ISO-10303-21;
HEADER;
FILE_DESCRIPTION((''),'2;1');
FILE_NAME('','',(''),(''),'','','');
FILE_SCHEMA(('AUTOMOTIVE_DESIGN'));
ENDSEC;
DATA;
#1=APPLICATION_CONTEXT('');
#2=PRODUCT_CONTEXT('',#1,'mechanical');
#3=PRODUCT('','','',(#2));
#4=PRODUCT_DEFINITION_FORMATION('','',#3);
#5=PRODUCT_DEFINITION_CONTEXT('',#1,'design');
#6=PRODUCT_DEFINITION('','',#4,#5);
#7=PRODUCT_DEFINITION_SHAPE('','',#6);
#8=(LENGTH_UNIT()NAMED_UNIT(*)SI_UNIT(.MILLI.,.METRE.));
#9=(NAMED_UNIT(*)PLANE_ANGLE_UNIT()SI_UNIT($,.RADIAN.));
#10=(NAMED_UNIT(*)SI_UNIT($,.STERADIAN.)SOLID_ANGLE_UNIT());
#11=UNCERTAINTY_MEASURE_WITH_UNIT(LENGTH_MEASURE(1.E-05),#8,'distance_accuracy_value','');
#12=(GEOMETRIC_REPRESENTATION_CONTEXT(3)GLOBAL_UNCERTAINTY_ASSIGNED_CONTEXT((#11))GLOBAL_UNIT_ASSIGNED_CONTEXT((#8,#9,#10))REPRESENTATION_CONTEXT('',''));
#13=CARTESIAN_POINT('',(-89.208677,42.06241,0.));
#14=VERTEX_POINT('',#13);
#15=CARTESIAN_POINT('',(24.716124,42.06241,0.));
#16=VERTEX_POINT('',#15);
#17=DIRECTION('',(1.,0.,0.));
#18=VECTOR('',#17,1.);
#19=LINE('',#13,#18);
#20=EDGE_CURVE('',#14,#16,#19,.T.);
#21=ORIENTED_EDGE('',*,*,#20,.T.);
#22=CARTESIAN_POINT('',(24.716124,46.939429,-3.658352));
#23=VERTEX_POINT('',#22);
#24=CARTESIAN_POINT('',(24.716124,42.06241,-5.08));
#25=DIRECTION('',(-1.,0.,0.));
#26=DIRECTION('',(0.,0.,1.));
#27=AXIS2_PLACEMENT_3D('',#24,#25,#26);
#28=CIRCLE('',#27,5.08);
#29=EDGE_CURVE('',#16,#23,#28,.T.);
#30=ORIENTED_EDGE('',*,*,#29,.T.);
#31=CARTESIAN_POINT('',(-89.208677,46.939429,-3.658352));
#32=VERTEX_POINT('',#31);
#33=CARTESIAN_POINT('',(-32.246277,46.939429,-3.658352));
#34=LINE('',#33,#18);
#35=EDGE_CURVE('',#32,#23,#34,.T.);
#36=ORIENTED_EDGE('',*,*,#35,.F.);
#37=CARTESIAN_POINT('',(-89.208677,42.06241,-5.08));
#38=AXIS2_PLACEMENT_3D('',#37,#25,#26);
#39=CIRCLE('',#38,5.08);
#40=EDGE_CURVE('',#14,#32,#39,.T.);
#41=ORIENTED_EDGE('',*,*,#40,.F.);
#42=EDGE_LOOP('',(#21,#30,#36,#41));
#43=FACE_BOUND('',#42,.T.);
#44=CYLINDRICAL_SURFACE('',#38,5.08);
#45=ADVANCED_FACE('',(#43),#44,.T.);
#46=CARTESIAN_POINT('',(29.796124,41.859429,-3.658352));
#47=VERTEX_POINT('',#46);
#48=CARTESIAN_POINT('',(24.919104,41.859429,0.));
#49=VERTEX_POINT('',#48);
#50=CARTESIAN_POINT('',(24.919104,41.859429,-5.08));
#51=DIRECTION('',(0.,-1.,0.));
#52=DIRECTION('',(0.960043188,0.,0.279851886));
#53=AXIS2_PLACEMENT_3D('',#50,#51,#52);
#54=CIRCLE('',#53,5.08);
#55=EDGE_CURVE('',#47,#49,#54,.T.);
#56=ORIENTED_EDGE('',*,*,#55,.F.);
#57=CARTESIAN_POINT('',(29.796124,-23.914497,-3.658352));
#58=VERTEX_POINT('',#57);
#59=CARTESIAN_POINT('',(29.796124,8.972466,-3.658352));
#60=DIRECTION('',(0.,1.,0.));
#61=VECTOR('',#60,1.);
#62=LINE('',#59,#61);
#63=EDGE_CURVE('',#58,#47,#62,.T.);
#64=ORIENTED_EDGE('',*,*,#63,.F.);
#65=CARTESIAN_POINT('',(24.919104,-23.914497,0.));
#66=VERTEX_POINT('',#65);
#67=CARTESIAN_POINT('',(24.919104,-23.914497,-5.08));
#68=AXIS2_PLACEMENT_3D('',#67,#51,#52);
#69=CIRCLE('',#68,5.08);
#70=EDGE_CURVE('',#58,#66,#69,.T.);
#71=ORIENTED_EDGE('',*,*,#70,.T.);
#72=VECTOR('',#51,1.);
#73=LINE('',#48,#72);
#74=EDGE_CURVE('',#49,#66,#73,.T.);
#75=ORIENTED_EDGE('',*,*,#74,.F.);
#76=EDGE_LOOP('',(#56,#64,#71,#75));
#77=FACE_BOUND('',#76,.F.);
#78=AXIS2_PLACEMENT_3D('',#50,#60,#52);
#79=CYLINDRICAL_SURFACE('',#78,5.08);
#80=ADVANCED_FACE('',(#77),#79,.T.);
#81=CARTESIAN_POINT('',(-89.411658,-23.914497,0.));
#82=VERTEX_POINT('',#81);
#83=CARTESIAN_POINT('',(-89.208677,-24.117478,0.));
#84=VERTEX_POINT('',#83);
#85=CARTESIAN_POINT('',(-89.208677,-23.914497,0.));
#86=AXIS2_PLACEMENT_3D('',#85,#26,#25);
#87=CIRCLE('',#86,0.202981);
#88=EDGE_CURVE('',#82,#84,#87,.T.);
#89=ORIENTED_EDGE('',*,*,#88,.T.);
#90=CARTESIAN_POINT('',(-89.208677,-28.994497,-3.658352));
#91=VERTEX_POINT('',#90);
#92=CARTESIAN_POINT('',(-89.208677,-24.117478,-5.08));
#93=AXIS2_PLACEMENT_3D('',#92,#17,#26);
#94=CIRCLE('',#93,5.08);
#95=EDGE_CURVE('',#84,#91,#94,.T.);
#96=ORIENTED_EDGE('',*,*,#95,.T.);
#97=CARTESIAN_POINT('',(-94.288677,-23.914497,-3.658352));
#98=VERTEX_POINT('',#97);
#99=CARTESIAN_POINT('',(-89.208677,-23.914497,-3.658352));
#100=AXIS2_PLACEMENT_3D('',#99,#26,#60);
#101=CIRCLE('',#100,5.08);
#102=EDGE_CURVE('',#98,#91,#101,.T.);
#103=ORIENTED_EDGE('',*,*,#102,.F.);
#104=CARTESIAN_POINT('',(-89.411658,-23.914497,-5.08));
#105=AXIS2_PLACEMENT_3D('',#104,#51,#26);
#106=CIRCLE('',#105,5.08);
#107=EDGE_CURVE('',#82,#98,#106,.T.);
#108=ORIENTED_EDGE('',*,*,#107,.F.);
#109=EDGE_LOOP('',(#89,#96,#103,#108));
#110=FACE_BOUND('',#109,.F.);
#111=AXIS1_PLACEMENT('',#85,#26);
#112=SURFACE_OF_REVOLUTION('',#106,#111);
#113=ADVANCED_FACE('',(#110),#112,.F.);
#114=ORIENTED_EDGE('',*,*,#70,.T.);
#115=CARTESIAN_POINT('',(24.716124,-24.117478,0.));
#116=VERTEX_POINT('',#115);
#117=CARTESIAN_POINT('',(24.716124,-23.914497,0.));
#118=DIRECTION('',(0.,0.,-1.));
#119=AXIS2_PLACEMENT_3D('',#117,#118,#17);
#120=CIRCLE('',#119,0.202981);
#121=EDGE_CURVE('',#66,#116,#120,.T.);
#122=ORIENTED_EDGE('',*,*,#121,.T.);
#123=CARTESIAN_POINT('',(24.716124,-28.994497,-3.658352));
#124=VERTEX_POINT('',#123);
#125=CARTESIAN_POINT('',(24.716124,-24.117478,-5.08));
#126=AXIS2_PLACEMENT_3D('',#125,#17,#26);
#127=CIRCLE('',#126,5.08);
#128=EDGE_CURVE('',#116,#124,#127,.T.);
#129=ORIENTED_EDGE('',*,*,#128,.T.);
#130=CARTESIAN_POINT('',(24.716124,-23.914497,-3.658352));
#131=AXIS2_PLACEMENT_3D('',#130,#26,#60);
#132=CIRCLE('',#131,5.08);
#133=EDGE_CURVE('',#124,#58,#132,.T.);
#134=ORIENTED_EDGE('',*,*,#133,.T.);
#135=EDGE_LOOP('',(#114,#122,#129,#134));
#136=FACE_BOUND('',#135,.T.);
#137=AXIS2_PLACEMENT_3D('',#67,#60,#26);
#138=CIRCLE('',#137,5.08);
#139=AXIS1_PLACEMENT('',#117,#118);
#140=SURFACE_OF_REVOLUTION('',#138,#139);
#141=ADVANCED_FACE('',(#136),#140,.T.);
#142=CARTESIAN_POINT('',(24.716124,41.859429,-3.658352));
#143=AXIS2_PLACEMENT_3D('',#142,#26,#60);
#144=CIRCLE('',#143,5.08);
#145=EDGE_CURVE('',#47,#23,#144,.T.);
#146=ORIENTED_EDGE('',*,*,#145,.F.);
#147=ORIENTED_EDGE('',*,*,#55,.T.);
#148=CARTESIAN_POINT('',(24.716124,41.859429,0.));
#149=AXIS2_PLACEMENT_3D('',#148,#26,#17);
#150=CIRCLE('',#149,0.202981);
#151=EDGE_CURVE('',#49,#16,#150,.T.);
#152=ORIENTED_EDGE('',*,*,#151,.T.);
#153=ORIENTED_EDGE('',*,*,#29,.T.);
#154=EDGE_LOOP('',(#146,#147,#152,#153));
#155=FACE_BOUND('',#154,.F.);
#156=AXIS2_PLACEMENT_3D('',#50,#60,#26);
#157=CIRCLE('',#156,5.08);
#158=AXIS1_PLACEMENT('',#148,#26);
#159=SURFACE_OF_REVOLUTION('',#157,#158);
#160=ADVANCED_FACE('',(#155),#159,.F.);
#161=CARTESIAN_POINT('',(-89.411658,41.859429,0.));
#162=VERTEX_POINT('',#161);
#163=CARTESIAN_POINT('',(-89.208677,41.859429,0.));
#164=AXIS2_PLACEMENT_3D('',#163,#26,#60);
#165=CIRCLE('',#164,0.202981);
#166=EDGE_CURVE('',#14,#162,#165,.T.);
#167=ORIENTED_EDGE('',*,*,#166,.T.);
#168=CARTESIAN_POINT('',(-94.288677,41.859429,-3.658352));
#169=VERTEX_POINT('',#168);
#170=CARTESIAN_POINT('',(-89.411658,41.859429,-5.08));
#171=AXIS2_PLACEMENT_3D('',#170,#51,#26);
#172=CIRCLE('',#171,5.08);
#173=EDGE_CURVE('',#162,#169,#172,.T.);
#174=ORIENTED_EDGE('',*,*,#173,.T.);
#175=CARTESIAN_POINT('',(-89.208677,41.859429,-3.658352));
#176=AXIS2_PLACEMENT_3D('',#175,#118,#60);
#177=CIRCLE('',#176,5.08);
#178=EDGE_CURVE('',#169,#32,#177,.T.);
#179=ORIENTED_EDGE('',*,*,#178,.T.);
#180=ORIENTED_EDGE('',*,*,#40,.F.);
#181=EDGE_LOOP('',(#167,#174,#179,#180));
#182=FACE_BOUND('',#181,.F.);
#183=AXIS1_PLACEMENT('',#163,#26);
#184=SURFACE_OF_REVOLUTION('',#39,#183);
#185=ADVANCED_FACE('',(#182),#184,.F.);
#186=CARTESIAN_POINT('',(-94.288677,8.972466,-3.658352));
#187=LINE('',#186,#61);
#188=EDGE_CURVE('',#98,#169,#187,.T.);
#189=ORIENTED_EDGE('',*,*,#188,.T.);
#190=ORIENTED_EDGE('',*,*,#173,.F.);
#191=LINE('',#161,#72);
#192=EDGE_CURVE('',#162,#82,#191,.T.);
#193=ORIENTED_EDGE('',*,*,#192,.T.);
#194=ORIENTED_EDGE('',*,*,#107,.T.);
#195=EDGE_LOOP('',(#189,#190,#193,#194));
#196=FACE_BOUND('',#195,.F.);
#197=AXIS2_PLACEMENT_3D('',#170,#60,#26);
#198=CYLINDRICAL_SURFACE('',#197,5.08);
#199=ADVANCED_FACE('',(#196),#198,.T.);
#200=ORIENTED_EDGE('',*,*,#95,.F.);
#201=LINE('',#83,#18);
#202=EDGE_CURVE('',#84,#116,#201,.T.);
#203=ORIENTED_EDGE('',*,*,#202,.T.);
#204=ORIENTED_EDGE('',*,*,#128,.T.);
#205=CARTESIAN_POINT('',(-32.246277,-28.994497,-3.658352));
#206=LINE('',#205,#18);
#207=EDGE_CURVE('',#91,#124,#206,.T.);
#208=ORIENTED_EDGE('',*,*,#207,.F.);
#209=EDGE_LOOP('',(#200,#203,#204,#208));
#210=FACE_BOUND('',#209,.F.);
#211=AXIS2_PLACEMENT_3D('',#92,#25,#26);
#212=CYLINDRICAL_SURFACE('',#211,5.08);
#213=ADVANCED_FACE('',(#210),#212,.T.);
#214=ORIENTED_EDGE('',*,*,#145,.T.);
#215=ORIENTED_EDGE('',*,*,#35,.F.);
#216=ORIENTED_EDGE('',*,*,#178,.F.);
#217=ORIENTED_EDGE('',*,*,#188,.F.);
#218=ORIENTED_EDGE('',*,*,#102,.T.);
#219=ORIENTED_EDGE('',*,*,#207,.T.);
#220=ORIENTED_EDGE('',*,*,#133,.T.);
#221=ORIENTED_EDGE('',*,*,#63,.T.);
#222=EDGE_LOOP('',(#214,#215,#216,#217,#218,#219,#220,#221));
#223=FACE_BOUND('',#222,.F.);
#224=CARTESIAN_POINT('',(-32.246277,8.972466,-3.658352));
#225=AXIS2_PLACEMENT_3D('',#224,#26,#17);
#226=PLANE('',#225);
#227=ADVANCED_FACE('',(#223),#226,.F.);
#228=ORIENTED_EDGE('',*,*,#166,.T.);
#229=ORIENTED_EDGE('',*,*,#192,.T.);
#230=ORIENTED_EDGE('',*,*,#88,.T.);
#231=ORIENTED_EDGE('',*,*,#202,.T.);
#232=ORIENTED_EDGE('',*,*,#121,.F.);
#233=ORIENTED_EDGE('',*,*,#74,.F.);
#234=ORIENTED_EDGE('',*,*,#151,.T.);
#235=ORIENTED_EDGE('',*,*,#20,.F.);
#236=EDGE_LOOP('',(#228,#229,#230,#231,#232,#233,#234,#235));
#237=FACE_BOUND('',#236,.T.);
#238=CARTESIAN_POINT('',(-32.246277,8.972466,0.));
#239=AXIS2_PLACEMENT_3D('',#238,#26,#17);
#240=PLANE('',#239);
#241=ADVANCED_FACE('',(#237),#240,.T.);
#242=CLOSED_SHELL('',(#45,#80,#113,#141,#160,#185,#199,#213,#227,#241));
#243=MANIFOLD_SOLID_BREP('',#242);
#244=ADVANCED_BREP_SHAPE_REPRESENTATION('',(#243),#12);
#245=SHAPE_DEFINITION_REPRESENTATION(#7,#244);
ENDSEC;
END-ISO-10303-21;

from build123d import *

# Parameters (mm, degrees)
F0_W         = 124.0848004818
F0_H         = 75.9339258075
F1_DEPTH     = 3.6583524197
F2_R         = 5.08
F3_T1_DEPTH  = 113.9248004818
F3_T3_DEPTH  = 65.7739258075
F3_T6_ANGLE  = 90
F3_T8_ANGLE  = 90
F3_T10_ANGLE = 90
F3_T12_ANGLE = 90


# Not quite as in the source:
# - a fillet or chamfer that OpenCascade refuses, or shapes differently, is made with other operations: its cross-section is extruded or revolved along the edge and cut away or added


with BuildPart() as f1:
    # F0 (on Top) → F1 (new body)
    with BuildSketch(Plane.XY):
        with Locations((-32.2462767363, 8.972465992)):
            Rectangle(F0_W, F0_H)
    extrude(amount=-F1_DEPTH)

    # F2
    f2_edges = [f1.edges().sort_by_distance(p)[0] for p in [
        (29.796124, 46.939429, -1.829176),
        (29.796124, -28.994497, -1.829176),
        (-94.288677, 46.939429, -1.829176),
        (-94.288677, -28.994497, -1.829176),
    ]]
    fillet(f2_edges, radius=F2_R)

    # F3: fillet of radius 5.08 on 1 edges, made by hand

    # F3_s2 → F3_t1 (cut)
    with BuildSketch(Plane.YZ.offset(-89.2086769772)):
        with BuildLine():
            ThreePointArc((42.0624095029, 0), (45.110722995, -1.016235138), (46.9394288957, -3.6583524197))
            Line((46.9394288957, -3.6583524197), (46.9394288957, 0))
            Line((46.9394288957, 0), (42.0624095029, 0))
        make_face()
        with BuildLine():
            ThreePointArc((-24.117477519, 0), (-27.1657910111, -1.016235138), (-28.9944969118, -3.6583524197))
            Line((-28.9944969118, -3.6583524197), (-28.9944969118, 0))
            Line((-28.9944969118, 0), (-24.117477519, 0))
        make_face()
    extrude(amount=F3_T1_DEPTH, mode=Mode.SUBTRACT)

    # F3_s4 → F3_t3 (cut)
    with BuildSketch(Plane.XZ.offset(-41.8594288957)):
        with BuildLine():
            ThreePointArc((-89.4116575844, 0), (-92.4599710765, -1.016235138), (-94.2886769772, -3.6583524197))
            Line((-94.2886769772, -3.6583524197), (-94.2886769772, 0))
            Line((-94.2886769772, 0), (-89.4116575844, 0))
        make_face()
        with BuildLine():
            ThreePointArc((29.7961235046, -3.6583524197), (27.967417604, -1.016235138), (24.9191041119, 0))
            Line((24.9191041119, 0), (29.7961235046, 0))
            Line((29.7961235046, 0), (29.7961235046, -3.6583524197))
        make_face()
    extrude(amount=F3_T3_DEPTH, mode=Mode.SUBTRACT)

    # F3_s5 → F3_t6 (revolve, cut)
    with BuildSketch(Plane.YZ.offset(-89.2086769772)):
        with BuildLine():
            ThreePointArc((42.0624095029, 0), (45.110722995, -1.016235138), (46.9394288957, -3.6583524197))
            Line((46.9394288957, -3.6583524197), (46.9394288957, 0))
            Line((46.9394288957, 0), (42.0624095029, 0))
        make_face()
    revolve(axis=Axis((-89.2086769772, 41.8594288957, 0), (0, 0, 1)), revolution_arc=F3_T6_ANGLE, mode=Mode.SUBTRACT)

    # F3_s7 → F3_t8 (revolve, cut)
    with BuildSketch(Plane.XZ.offset(23.9144969118)):
        with BuildLine():
            ThreePointArc((-89.4116575844, 0), (-92.4599710765, -1.016235138), (-94.2886769772, -3.6583524197))
            Line((-94.2886769772, -3.6583524197), (-94.2886769772, 0))
            Line((-94.2886769772, 0), (-89.4116575844, 0))
        make_face()
    revolve(axis=Axis((-89.2086769772, -23.9144969118, 0), (0, 0, 1)), revolution_arc=F3_T8_ANGLE, mode=Mode.SUBTRACT)

    # F3_s9 → F3_t10 (revolve, cut)
    with BuildSketch(Plane.XZ.offset(23.9144969118)):
        with BuildLine():
            ThreePointArc((24.9191041119, 0), (27.967417604, -1.016235138), (29.7961235046, -3.6583524197))
            Line((29.7961235046, -3.6583524197), (29.7961235046, 0))
            Line((29.7961235046, 0), (24.9191041119, 0))
        make_face()
    revolve(axis=Axis((24.7161235046, -23.9144969118, 0), (0, 0, -1)), revolution_arc=F3_T10_ANGLE, mode=Mode.SUBTRACT)

    # F3_s11 → F3_t12 (revolve, cut)
    with BuildSketch(Plane.XZ.offset(-41.8594288957)):
        with BuildLine():
            ThreePointArc((24.9191041119, 0), (27.967417604, -1.016235138), (29.7961235046, -3.6583524197))
            Line((29.7961235046, -3.6583524197), (29.7961235046, 0))
            Line((29.7961235046, 0), (24.9191041119, 0))
        make_face()
    revolve(axis=Axis((24.7161235046, 41.8594288957, 0), (0, 0, 1)), revolution_arc=F3_T12_ANGLE, mode=Mode.SUBTRACT)


solid = f1.part
